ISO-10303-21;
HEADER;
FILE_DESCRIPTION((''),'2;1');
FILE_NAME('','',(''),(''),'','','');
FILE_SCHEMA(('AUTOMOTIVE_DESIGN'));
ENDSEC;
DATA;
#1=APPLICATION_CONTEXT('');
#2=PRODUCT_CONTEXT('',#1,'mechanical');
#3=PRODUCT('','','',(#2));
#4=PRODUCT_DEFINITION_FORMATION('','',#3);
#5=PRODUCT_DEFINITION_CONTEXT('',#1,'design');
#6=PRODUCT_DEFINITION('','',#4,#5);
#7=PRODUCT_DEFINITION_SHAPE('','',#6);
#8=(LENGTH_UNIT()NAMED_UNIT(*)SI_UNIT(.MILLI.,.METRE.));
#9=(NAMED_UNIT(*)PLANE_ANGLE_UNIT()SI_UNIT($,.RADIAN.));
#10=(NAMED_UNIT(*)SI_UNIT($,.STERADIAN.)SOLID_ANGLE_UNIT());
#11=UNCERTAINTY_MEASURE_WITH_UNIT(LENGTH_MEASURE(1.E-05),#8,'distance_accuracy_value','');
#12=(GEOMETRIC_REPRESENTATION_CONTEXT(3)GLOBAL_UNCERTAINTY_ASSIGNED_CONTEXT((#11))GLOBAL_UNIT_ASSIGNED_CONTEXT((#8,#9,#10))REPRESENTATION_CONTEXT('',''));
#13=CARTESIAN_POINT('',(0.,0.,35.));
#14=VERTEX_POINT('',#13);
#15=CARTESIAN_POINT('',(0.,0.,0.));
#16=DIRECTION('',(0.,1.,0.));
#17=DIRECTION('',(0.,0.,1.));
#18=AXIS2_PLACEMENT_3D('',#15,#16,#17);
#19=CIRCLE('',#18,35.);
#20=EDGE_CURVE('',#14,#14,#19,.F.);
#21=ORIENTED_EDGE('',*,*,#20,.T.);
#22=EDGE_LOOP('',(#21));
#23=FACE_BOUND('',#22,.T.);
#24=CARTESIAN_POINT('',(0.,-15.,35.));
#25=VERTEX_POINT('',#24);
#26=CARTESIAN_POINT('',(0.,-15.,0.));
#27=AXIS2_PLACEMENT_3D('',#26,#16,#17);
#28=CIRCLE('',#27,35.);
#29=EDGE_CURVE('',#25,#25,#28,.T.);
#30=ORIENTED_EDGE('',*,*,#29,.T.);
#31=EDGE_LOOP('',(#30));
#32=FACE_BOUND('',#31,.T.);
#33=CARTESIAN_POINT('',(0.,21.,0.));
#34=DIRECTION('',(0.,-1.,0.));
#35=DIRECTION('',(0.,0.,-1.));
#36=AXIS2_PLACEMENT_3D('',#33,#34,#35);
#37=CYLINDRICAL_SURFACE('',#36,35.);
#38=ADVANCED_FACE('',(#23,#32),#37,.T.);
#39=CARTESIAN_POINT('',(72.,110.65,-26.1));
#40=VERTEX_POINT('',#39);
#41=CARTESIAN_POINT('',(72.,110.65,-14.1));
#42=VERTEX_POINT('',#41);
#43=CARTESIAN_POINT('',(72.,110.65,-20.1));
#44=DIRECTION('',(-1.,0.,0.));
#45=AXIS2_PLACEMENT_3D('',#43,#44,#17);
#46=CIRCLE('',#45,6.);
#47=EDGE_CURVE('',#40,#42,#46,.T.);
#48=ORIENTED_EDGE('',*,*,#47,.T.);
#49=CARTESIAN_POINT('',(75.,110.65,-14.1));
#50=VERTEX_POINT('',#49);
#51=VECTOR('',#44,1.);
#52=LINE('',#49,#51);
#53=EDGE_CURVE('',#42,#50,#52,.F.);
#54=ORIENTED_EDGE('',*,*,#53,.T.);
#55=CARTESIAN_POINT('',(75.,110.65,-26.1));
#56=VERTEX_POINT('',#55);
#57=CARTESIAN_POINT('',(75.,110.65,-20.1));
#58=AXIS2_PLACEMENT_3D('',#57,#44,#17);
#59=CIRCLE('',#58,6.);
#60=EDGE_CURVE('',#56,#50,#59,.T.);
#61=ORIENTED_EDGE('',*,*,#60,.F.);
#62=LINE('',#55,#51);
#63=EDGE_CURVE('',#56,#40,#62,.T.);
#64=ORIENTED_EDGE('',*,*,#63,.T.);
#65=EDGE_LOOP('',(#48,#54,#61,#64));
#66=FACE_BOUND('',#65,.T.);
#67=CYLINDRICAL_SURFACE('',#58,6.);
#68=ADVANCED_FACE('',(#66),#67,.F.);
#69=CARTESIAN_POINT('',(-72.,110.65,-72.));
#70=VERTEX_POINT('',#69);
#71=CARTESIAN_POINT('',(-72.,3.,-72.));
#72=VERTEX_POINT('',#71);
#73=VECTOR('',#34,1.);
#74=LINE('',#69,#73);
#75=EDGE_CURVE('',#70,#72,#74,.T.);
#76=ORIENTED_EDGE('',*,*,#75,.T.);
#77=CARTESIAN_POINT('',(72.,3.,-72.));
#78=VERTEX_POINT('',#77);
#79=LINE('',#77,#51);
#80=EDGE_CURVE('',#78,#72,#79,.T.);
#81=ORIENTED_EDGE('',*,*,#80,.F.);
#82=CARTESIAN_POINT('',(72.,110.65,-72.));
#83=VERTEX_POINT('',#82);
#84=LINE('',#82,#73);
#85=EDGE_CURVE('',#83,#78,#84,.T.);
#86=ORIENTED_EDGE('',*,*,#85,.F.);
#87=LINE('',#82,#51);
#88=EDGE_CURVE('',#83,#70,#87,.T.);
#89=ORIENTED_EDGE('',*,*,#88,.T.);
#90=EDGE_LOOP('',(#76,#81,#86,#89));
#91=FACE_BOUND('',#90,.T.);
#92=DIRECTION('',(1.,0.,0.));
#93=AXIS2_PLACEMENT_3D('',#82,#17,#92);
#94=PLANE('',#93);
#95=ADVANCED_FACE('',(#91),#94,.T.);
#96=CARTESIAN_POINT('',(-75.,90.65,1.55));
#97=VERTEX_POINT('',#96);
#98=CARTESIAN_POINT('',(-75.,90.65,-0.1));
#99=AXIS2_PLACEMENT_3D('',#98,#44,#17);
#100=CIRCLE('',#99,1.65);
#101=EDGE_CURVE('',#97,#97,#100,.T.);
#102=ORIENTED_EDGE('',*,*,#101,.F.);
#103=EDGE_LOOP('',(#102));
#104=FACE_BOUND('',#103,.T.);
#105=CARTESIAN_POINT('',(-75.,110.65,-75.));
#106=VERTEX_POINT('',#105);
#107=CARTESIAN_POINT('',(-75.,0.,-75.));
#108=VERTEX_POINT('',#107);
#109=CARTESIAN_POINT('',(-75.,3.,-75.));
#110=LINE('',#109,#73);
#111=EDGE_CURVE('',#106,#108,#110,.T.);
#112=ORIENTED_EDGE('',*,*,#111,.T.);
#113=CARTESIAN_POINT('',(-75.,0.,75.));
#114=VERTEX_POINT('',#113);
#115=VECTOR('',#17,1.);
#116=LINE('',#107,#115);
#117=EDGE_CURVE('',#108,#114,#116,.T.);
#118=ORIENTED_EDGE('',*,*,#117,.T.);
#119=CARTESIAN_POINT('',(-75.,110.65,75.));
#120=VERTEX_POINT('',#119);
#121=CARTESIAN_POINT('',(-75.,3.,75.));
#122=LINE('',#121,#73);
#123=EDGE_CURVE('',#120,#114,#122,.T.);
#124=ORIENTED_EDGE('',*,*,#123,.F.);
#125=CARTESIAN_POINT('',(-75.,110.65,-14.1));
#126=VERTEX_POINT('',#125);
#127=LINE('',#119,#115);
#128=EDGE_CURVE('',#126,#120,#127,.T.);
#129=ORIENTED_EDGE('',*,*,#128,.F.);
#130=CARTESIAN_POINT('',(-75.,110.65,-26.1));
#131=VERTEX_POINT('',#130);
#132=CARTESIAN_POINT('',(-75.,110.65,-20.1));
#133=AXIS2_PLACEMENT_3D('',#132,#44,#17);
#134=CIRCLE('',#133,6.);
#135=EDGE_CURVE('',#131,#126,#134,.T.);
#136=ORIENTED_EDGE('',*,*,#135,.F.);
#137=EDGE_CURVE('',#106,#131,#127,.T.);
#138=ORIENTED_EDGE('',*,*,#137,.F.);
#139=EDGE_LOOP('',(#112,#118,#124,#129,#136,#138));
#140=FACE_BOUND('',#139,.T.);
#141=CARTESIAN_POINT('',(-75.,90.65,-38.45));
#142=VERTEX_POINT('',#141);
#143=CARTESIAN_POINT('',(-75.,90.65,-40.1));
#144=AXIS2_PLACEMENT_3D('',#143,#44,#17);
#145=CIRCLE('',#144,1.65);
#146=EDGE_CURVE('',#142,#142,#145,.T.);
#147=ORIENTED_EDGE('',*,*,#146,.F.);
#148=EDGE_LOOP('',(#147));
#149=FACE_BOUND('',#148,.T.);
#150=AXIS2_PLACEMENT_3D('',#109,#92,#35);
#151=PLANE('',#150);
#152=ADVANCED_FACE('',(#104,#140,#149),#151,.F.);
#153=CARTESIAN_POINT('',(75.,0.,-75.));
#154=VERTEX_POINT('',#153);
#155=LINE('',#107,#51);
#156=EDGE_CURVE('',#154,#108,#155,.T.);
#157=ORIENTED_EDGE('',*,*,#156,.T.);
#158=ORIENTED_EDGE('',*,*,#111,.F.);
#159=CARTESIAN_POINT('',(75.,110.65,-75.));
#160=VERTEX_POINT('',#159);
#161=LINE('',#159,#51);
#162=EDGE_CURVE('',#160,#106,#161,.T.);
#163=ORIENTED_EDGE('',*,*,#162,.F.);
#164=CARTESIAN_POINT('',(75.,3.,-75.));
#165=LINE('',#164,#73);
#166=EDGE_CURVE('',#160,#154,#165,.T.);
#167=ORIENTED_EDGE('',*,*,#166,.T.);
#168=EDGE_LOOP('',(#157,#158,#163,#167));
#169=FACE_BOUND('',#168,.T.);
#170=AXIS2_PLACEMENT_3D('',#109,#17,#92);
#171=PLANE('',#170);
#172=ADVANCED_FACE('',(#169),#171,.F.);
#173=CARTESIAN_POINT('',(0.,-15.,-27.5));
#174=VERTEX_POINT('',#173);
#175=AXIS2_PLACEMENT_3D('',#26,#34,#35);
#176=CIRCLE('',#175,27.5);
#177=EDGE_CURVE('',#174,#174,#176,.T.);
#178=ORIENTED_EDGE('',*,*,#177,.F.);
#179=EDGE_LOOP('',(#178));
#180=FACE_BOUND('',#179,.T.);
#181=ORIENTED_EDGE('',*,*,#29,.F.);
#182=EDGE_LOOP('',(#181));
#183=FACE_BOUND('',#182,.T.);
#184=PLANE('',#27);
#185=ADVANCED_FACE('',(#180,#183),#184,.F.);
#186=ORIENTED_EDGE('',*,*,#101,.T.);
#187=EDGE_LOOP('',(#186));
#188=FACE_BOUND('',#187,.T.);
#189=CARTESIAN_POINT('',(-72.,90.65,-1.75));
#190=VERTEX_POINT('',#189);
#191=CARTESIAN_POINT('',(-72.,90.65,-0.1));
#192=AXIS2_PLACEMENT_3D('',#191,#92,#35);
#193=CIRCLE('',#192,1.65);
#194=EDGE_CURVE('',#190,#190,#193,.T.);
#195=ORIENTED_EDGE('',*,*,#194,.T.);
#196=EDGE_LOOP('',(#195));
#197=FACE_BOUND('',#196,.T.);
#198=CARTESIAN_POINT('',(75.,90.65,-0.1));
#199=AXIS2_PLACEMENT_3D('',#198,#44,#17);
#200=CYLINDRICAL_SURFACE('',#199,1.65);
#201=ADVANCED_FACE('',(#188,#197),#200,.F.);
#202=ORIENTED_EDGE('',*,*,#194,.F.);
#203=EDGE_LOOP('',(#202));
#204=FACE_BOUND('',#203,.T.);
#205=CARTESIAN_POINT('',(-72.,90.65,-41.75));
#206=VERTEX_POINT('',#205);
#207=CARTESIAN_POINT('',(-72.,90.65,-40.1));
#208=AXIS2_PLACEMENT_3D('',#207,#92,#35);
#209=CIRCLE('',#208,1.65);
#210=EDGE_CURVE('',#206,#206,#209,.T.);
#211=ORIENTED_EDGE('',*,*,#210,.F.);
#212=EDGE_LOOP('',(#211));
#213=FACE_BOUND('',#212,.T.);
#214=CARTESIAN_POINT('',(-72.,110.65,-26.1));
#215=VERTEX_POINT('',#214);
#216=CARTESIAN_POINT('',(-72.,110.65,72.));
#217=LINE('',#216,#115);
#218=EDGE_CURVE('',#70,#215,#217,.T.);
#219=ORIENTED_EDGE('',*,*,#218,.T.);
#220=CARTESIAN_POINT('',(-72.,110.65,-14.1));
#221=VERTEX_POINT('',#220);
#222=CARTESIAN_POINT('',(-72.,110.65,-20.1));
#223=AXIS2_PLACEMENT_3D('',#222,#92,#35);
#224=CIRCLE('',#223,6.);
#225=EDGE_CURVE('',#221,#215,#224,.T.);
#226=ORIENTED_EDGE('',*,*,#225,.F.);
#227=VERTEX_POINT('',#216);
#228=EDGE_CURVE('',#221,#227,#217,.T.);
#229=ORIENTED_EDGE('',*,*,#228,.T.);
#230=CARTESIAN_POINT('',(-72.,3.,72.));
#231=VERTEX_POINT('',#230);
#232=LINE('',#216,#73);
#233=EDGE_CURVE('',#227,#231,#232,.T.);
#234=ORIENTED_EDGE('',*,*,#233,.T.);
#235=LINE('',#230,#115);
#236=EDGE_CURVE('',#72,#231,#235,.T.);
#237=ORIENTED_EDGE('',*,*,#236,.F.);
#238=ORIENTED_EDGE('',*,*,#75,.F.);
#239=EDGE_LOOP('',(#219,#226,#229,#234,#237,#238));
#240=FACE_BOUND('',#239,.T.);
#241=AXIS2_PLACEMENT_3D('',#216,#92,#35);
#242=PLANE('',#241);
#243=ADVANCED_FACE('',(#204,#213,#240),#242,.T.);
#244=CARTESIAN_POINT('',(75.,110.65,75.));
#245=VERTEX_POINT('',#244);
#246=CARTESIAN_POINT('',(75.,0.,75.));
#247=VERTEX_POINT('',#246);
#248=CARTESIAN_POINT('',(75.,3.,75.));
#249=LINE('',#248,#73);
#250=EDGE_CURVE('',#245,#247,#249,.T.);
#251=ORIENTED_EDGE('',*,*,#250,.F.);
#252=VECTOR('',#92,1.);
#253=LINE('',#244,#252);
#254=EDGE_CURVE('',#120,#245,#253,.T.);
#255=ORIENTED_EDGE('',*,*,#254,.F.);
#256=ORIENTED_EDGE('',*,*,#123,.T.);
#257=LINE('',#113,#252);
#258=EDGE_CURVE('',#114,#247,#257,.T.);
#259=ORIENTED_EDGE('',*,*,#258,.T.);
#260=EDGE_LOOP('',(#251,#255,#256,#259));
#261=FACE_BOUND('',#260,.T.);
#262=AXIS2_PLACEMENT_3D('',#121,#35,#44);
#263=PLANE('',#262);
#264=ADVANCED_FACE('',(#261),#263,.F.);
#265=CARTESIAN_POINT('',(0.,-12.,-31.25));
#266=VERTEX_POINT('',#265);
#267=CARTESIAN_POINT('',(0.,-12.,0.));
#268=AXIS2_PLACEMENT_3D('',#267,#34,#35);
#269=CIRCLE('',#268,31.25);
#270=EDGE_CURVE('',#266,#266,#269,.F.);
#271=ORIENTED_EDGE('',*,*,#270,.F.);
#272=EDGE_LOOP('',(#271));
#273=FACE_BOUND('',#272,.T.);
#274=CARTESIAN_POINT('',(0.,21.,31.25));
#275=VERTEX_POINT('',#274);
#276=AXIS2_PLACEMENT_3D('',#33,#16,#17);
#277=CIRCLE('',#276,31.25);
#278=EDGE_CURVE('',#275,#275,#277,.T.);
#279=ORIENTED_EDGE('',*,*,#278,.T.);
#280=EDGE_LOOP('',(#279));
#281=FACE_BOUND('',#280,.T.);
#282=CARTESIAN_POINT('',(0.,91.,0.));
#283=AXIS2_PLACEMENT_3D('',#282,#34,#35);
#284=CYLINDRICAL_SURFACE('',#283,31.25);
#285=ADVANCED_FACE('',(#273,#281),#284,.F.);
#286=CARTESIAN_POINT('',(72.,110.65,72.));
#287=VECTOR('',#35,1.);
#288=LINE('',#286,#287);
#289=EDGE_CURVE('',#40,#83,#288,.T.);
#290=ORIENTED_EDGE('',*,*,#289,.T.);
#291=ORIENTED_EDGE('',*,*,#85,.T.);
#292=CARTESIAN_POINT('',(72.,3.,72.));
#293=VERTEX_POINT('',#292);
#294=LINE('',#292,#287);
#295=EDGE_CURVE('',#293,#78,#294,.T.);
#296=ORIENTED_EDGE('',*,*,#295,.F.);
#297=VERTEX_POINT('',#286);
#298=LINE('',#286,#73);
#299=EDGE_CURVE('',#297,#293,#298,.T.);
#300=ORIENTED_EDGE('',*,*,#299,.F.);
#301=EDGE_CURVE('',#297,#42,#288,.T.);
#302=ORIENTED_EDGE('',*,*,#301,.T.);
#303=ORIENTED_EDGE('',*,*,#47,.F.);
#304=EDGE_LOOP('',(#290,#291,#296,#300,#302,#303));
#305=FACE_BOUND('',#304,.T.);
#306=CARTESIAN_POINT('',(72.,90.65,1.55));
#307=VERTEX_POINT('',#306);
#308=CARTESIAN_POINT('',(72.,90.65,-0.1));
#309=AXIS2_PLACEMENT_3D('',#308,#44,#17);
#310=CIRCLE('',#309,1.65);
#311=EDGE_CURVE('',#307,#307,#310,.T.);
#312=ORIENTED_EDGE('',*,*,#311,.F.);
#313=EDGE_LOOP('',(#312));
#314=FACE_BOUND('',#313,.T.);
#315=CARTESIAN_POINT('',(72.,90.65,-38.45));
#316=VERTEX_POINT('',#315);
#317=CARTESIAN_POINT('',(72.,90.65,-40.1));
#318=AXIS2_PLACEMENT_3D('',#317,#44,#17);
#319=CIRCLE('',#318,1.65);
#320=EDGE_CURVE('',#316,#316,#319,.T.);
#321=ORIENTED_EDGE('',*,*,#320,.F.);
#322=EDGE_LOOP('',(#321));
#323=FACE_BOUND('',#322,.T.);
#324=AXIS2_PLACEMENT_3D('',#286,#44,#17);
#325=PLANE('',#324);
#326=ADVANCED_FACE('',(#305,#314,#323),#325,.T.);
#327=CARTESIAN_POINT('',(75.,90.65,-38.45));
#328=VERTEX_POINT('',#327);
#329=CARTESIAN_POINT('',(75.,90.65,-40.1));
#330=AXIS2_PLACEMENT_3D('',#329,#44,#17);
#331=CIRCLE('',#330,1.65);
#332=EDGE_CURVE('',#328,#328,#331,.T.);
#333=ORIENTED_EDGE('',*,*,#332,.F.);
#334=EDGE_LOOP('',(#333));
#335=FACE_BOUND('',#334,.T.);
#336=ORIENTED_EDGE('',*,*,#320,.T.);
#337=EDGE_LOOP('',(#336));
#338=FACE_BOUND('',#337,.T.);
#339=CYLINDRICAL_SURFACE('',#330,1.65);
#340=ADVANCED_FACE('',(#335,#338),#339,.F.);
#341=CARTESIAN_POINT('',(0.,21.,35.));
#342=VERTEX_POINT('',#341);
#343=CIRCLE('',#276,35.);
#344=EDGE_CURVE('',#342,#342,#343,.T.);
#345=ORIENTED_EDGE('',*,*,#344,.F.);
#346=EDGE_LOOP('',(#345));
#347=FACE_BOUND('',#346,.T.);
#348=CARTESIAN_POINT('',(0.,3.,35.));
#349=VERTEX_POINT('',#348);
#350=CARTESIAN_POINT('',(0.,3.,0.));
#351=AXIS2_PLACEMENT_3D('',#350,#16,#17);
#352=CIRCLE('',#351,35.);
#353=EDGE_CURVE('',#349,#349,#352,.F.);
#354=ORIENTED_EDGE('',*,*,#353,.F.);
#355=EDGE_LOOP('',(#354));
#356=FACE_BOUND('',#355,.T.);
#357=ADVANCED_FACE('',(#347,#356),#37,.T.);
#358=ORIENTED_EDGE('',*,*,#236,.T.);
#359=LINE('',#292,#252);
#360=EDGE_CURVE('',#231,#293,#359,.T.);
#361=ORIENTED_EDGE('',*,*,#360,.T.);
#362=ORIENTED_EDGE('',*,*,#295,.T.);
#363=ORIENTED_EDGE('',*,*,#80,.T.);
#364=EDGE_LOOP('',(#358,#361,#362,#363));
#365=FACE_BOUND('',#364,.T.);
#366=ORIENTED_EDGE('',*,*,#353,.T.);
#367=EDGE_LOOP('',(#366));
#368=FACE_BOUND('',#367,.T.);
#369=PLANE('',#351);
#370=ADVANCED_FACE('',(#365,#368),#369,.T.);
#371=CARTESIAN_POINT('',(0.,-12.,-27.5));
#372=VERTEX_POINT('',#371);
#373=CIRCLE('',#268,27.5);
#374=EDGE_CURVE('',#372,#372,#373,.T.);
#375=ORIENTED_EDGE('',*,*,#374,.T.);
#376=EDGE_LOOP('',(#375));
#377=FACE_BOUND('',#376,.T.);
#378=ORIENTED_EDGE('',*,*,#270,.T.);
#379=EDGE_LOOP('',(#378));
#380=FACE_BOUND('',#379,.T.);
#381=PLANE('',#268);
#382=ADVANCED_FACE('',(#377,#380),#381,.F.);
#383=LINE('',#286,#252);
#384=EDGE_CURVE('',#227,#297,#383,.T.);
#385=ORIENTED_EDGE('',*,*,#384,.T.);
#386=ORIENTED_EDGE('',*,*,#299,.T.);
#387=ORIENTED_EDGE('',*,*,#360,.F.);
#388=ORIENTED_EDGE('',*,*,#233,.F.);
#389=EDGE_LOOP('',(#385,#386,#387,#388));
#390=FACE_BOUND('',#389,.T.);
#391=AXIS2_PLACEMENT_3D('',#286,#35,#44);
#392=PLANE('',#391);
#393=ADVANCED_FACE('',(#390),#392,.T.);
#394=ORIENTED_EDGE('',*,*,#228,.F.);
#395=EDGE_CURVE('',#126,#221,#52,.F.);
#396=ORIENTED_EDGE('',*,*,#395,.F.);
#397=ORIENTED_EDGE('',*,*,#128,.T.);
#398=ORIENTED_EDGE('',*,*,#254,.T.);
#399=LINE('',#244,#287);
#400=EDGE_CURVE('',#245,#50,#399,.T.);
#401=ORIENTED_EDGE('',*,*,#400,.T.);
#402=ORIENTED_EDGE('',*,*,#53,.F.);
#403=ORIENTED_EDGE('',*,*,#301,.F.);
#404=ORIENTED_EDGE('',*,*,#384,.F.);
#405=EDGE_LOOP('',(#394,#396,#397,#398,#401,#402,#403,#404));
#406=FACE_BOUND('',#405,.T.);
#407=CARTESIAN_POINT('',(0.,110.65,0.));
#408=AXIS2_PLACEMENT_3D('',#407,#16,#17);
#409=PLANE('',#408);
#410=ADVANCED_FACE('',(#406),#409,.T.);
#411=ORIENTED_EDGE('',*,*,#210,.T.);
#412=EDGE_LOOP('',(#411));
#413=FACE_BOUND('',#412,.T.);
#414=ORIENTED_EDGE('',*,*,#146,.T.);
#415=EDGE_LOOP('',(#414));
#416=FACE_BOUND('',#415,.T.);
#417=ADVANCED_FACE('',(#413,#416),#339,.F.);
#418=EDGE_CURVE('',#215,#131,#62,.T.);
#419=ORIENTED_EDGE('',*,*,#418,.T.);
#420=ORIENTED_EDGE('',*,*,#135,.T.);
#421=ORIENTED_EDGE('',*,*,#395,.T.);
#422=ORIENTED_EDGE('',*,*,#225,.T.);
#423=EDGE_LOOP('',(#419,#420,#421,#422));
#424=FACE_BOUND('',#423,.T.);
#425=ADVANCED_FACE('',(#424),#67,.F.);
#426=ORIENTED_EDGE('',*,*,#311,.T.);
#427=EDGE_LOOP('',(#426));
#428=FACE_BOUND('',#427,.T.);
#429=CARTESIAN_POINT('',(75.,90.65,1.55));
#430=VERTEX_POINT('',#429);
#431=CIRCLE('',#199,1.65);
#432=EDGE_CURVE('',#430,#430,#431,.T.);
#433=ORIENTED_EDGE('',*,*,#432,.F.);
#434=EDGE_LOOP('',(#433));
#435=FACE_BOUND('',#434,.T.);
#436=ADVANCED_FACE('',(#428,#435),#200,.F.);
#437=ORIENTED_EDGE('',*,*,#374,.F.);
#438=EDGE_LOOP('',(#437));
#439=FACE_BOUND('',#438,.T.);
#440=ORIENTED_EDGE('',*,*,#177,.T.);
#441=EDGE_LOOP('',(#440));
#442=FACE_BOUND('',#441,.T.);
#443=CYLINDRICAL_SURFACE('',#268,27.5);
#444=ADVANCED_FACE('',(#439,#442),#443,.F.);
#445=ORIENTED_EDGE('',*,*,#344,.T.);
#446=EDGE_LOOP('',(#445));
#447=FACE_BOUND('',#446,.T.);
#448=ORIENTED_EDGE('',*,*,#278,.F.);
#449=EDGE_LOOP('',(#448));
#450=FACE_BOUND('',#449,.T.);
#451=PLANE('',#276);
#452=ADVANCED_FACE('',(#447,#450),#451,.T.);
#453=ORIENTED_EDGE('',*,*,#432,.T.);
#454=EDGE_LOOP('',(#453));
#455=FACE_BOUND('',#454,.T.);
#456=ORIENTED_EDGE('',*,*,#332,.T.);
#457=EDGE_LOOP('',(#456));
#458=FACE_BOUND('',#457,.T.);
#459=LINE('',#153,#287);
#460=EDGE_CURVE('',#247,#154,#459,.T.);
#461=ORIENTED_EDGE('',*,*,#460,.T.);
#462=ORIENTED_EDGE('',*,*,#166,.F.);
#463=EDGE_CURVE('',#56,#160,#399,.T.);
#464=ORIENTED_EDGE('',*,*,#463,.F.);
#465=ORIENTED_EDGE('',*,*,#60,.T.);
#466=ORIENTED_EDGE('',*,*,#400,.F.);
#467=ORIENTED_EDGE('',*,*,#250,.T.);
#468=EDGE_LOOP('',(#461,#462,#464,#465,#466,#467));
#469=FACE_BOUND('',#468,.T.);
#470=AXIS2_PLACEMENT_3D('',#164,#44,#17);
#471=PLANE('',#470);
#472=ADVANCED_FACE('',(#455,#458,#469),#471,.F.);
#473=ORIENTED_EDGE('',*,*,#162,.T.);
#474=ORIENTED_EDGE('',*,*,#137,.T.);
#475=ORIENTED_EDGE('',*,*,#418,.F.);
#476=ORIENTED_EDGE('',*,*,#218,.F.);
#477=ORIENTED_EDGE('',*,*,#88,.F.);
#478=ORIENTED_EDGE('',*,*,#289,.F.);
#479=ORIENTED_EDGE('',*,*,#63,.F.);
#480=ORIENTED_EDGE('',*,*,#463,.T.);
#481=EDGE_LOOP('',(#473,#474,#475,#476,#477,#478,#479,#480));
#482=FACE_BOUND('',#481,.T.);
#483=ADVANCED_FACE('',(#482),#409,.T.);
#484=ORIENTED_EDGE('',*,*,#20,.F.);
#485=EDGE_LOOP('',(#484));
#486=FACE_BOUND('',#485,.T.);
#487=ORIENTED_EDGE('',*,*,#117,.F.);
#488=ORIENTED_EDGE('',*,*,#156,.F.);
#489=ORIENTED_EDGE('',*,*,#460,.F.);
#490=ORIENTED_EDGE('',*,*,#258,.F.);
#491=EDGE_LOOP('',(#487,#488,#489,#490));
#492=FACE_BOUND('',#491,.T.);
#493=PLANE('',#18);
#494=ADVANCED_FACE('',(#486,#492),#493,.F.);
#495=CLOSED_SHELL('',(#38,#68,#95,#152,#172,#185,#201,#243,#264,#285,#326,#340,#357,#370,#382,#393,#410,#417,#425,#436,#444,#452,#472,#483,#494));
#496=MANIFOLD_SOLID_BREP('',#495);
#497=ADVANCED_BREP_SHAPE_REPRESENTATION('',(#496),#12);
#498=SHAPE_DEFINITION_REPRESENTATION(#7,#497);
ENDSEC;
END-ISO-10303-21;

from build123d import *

# Parameters (mm, degrees)
SKETCH_1_W          = 150
SKETCH_1_H          = 150
EXTRUDE_1_DEPTH     = 3
SKETCH_2_W          = 150
SKETCH_2_H          = 150
SKETCH_2_W_2        = 144
SKETCH_2_H_2        = 144
EXTRUDE_2_DEPTH     = 107.65
SKETCH_3_R          = 31.25
CUT_EXTRUDE_1_DEPTH = 91
SKETCH_4_R          = 6
CUT_EXTRUDE_2_DEPTH = 201.9189451
SKETCH_8_R          = 35
SKETCH_8_R_2        = 31.25
EXTRUDE_4_DEPTH     = 18
SKETCH_9_R          = 1.65
CUT_EXTRUDE_3_DEPTH = 201.9189451
SKETCH_11_R         = 31.25
SKETCH_11_R_2       = 27.5
EXTRUDE_5_DEPTH     = 3


with BuildPart() as part:
    # 草图1 → 凸台-拉伸1 (new body)
    with BuildSketch(Plane(origin=(0, 0, 0), x_dir=(1, 0, 0), z_dir=(0, 1, 0))):
        Rectangle(SKETCH_1_W, SKETCH_1_H)
    extrude(amount=EXTRUDE_1_DEPTH)

    # 草图2 → 凸台-拉伸2 (add)
    with BuildSketch(Plane(origin=(0, 3, 0), x_dir=(1, 0, 0), z_dir=(0, 1, 0))):
        Rectangle(SKETCH_2_W, SKETCH_2_H)
        Rectangle(SKETCH_2_W_2, SKETCH_2_H_2, mode=Mode.SUBTRACT)
    extrude(amount=EXTRUDE_2_DEPTH)

    # 草图3 → 切除-拉伸1 (cut)
    with BuildSketch(Plane.XZ):
        Circle(SKETCH_3_R)
    extrude(amount=-CUT_EXTRUDE_1_DEPTH, mode=Mode.SUBTRACT)

    # 草图4 → 切除-拉伸2 (cut, through all)
    with BuildSketch(Plane.ZY.offset(75)):
        with Locations((-20.1, 110.65)):
            Circle(SKETCH_4_R)
    extrude(amount=-CUT_EXTRUDE_2_DEPTH, mode=Mode.SUBTRACT)

    # 草图8 → 凸台-拉伸4 (add, symmetric)
    with BuildSketch(Plane(origin=(0, 3, 0), x_dir=(1, 0, 0), z_dir=(0, 1, 0))):
        Circle(SKETCH_8_R)
        Circle(SKETCH_8_R_2, mode=Mode.SUBTRACT)
    extrude(amount=EXTRUDE_4_DEPTH, both=True)

    # 草图9 → 切除-拉伸3 (cut, through all)
    with BuildSketch(Plane.ZY.offset(75)):
        with Locations((-40.1, 90.65)):
            Circle(SKETCH_9_R)
        with Locations((-0.1, 90.65)):
            Circle(SKETCH_9_R)
    extrude(amount=-CUT_EXTRUDE_3_DEPTH, mode=Mode.SUBTRACT)

    # 草图11 → 凸台-拉伸5 (add)
    with BuildSketch(Plane.XZ.offset(15)):
        Circle(SKETCH_11_R)
        Circle(SKETCH_11_R_2, mode=Mode.SUBTRACT)
    extrude(amount=-EXTRUDE_5_DEPTH)


solid = part.part
